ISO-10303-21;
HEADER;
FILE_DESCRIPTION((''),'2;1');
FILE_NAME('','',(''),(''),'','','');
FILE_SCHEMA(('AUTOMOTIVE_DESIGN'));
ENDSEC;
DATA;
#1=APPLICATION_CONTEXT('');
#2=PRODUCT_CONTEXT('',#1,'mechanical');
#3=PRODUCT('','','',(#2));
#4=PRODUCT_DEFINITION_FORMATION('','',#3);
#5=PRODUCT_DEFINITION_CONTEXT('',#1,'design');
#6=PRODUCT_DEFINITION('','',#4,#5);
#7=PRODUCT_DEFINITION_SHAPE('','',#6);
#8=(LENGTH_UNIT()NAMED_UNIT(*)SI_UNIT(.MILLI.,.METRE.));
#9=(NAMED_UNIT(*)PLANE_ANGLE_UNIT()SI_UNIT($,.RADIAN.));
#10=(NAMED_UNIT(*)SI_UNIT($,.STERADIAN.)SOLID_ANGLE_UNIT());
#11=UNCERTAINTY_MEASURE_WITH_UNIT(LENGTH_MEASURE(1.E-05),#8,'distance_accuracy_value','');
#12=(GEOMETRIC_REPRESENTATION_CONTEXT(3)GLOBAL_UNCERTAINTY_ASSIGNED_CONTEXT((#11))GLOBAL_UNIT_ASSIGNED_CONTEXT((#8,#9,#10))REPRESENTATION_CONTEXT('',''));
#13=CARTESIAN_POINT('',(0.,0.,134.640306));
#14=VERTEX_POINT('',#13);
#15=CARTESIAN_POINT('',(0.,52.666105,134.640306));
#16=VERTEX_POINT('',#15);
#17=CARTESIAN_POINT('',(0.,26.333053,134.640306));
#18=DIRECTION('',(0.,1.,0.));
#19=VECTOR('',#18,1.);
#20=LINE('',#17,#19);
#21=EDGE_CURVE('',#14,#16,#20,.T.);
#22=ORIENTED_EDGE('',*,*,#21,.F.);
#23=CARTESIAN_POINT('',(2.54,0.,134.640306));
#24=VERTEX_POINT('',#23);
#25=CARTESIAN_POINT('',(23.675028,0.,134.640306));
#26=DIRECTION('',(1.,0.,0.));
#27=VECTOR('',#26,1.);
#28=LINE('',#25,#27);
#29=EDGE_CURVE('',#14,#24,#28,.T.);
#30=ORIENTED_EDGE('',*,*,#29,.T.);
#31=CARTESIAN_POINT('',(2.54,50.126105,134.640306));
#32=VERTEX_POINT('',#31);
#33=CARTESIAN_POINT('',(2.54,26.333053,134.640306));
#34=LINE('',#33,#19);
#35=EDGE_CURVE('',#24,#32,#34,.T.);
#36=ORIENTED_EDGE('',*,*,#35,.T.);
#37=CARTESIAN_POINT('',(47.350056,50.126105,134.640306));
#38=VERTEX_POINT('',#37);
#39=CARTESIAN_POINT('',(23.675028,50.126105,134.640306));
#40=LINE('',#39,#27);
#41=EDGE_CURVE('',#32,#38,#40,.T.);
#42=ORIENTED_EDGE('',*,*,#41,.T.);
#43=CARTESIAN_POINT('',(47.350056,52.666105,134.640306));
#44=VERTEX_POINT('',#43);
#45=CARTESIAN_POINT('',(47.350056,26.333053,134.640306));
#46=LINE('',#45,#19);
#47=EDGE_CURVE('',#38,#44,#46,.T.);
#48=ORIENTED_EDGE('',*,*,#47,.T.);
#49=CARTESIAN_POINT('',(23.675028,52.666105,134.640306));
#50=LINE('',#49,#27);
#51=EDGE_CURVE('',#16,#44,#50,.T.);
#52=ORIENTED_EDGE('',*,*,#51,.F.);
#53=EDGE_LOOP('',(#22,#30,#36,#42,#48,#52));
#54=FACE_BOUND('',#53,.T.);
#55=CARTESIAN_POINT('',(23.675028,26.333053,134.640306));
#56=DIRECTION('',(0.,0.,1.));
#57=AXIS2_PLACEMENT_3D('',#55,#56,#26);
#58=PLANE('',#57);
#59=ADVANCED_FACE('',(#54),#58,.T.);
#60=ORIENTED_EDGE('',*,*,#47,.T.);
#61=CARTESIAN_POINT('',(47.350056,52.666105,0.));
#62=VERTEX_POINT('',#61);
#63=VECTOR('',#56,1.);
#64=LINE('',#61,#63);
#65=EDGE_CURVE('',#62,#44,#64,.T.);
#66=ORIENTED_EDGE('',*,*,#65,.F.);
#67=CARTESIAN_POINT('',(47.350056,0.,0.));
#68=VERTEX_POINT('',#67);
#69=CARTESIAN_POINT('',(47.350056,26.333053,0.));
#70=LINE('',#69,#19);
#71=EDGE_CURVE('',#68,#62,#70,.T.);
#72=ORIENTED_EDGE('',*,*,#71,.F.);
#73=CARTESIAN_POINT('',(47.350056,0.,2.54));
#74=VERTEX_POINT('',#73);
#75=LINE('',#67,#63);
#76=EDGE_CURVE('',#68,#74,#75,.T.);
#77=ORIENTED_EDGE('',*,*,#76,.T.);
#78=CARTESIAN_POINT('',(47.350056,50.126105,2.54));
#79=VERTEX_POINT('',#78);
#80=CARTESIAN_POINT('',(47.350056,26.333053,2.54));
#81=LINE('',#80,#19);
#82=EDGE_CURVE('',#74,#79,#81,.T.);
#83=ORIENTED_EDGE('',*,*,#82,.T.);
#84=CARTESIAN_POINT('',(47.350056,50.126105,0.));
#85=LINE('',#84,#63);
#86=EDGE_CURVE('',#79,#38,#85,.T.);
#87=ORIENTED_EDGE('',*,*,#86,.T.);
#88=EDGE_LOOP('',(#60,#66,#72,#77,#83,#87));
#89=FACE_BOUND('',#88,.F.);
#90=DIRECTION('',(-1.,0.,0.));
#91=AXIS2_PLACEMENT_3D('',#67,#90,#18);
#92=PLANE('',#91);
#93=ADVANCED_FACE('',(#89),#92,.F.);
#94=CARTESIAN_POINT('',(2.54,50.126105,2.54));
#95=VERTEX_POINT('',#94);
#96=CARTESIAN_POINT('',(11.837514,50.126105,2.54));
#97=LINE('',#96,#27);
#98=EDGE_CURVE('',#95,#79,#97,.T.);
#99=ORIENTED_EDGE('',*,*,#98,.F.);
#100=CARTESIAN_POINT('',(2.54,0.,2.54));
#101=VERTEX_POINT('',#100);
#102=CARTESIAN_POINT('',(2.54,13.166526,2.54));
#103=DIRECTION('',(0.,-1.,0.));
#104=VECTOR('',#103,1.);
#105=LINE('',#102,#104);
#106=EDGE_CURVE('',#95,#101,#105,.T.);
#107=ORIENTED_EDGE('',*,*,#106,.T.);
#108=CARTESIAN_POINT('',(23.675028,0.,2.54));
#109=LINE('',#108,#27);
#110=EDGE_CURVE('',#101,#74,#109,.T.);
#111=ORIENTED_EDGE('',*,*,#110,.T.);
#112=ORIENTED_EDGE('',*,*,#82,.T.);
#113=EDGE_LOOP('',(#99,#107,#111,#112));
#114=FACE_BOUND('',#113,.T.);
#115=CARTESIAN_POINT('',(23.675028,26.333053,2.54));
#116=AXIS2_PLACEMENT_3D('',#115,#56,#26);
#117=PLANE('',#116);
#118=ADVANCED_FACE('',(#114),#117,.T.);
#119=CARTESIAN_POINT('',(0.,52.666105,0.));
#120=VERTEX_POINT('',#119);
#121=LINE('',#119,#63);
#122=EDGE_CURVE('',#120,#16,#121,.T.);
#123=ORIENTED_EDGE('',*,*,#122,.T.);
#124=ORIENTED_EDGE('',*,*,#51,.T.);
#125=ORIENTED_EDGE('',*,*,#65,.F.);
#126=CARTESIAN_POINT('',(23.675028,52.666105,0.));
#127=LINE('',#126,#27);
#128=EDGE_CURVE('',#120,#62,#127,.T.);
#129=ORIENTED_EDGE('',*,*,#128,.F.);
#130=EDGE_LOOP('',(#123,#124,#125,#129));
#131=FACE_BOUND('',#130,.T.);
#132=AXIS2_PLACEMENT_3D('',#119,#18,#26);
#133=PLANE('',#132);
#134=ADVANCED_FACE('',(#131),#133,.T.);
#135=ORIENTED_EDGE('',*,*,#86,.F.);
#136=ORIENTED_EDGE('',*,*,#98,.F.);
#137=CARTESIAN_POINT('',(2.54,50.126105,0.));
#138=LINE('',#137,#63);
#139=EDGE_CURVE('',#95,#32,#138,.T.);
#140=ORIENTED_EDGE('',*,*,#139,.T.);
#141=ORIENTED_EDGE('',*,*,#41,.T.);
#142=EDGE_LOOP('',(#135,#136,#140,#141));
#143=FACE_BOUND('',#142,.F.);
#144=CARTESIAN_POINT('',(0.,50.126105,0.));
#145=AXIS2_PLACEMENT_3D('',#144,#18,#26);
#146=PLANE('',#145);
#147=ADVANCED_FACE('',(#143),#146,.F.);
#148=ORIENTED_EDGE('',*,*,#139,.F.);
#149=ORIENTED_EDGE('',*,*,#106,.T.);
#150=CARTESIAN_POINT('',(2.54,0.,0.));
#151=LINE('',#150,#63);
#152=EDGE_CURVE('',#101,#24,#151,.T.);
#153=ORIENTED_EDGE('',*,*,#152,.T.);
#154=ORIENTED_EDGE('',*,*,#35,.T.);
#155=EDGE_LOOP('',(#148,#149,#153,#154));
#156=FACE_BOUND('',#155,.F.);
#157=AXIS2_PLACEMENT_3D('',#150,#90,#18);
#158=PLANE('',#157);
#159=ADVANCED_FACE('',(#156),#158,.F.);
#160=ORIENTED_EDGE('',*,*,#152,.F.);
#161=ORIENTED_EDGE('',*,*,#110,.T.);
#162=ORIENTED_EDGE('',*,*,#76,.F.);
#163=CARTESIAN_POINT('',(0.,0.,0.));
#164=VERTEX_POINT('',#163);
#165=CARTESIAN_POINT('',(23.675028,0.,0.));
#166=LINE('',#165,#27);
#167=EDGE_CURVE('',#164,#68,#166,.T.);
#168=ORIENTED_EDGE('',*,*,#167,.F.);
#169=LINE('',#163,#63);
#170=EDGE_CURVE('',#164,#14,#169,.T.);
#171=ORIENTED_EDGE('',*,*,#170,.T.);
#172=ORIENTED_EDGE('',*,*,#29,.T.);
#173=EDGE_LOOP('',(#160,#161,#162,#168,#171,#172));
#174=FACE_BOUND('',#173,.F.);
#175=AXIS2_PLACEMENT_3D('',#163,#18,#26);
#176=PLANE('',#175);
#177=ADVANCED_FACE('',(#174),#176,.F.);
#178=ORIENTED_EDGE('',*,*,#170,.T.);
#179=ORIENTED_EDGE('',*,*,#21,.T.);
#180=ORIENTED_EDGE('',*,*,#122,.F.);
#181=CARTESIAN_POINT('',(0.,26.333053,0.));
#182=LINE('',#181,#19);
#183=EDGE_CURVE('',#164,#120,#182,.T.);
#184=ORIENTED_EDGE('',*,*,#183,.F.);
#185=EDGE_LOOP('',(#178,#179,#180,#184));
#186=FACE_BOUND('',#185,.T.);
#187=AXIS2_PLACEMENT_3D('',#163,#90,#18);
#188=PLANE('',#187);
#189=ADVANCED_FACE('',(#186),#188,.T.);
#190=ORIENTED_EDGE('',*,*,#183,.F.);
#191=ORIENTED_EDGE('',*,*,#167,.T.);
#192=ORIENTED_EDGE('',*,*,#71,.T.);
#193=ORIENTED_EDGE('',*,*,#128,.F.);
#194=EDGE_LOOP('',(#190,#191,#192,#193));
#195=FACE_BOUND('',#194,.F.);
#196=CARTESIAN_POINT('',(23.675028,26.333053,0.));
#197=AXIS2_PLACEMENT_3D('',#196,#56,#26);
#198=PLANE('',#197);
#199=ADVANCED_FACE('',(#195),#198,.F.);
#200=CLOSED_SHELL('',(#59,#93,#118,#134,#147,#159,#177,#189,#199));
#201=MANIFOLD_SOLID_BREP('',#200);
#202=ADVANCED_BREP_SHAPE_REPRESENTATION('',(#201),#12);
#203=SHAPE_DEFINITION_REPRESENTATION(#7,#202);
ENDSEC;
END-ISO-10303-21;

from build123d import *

# Parameters (mm, degrees)
F0_W     = 47.3500564694
F0_H     = 52.66610533
F1_DEPTH = 134.6403062344
F2_T     = -2.54


# Not quite as in the source:
# - a feature of the source that left no trace in its solid (it failed there, or was rolled back) is left out


with BuildPart() as f1:
    # F0 (on Top) → F1 (new body)
    with BuildSketch(Plane.XY):
        with Locations((23.6750282347, 26.333052665)):
            Rectangle(F0_W, F0_H)
    extrude(amount=F1_DEPTH)

    # F2
    f2_openings = [f1.faces().sort_by_distance(p)[0] for p in [
        (23.675028, 0, 67.320153),
        (47.350056, 26.333053, 67.320153),
        (23.675028, 26.333053, 134.640306),
    ]]
    offset(amount=F2_T, openings=f2_openings)


solid = f1.part
